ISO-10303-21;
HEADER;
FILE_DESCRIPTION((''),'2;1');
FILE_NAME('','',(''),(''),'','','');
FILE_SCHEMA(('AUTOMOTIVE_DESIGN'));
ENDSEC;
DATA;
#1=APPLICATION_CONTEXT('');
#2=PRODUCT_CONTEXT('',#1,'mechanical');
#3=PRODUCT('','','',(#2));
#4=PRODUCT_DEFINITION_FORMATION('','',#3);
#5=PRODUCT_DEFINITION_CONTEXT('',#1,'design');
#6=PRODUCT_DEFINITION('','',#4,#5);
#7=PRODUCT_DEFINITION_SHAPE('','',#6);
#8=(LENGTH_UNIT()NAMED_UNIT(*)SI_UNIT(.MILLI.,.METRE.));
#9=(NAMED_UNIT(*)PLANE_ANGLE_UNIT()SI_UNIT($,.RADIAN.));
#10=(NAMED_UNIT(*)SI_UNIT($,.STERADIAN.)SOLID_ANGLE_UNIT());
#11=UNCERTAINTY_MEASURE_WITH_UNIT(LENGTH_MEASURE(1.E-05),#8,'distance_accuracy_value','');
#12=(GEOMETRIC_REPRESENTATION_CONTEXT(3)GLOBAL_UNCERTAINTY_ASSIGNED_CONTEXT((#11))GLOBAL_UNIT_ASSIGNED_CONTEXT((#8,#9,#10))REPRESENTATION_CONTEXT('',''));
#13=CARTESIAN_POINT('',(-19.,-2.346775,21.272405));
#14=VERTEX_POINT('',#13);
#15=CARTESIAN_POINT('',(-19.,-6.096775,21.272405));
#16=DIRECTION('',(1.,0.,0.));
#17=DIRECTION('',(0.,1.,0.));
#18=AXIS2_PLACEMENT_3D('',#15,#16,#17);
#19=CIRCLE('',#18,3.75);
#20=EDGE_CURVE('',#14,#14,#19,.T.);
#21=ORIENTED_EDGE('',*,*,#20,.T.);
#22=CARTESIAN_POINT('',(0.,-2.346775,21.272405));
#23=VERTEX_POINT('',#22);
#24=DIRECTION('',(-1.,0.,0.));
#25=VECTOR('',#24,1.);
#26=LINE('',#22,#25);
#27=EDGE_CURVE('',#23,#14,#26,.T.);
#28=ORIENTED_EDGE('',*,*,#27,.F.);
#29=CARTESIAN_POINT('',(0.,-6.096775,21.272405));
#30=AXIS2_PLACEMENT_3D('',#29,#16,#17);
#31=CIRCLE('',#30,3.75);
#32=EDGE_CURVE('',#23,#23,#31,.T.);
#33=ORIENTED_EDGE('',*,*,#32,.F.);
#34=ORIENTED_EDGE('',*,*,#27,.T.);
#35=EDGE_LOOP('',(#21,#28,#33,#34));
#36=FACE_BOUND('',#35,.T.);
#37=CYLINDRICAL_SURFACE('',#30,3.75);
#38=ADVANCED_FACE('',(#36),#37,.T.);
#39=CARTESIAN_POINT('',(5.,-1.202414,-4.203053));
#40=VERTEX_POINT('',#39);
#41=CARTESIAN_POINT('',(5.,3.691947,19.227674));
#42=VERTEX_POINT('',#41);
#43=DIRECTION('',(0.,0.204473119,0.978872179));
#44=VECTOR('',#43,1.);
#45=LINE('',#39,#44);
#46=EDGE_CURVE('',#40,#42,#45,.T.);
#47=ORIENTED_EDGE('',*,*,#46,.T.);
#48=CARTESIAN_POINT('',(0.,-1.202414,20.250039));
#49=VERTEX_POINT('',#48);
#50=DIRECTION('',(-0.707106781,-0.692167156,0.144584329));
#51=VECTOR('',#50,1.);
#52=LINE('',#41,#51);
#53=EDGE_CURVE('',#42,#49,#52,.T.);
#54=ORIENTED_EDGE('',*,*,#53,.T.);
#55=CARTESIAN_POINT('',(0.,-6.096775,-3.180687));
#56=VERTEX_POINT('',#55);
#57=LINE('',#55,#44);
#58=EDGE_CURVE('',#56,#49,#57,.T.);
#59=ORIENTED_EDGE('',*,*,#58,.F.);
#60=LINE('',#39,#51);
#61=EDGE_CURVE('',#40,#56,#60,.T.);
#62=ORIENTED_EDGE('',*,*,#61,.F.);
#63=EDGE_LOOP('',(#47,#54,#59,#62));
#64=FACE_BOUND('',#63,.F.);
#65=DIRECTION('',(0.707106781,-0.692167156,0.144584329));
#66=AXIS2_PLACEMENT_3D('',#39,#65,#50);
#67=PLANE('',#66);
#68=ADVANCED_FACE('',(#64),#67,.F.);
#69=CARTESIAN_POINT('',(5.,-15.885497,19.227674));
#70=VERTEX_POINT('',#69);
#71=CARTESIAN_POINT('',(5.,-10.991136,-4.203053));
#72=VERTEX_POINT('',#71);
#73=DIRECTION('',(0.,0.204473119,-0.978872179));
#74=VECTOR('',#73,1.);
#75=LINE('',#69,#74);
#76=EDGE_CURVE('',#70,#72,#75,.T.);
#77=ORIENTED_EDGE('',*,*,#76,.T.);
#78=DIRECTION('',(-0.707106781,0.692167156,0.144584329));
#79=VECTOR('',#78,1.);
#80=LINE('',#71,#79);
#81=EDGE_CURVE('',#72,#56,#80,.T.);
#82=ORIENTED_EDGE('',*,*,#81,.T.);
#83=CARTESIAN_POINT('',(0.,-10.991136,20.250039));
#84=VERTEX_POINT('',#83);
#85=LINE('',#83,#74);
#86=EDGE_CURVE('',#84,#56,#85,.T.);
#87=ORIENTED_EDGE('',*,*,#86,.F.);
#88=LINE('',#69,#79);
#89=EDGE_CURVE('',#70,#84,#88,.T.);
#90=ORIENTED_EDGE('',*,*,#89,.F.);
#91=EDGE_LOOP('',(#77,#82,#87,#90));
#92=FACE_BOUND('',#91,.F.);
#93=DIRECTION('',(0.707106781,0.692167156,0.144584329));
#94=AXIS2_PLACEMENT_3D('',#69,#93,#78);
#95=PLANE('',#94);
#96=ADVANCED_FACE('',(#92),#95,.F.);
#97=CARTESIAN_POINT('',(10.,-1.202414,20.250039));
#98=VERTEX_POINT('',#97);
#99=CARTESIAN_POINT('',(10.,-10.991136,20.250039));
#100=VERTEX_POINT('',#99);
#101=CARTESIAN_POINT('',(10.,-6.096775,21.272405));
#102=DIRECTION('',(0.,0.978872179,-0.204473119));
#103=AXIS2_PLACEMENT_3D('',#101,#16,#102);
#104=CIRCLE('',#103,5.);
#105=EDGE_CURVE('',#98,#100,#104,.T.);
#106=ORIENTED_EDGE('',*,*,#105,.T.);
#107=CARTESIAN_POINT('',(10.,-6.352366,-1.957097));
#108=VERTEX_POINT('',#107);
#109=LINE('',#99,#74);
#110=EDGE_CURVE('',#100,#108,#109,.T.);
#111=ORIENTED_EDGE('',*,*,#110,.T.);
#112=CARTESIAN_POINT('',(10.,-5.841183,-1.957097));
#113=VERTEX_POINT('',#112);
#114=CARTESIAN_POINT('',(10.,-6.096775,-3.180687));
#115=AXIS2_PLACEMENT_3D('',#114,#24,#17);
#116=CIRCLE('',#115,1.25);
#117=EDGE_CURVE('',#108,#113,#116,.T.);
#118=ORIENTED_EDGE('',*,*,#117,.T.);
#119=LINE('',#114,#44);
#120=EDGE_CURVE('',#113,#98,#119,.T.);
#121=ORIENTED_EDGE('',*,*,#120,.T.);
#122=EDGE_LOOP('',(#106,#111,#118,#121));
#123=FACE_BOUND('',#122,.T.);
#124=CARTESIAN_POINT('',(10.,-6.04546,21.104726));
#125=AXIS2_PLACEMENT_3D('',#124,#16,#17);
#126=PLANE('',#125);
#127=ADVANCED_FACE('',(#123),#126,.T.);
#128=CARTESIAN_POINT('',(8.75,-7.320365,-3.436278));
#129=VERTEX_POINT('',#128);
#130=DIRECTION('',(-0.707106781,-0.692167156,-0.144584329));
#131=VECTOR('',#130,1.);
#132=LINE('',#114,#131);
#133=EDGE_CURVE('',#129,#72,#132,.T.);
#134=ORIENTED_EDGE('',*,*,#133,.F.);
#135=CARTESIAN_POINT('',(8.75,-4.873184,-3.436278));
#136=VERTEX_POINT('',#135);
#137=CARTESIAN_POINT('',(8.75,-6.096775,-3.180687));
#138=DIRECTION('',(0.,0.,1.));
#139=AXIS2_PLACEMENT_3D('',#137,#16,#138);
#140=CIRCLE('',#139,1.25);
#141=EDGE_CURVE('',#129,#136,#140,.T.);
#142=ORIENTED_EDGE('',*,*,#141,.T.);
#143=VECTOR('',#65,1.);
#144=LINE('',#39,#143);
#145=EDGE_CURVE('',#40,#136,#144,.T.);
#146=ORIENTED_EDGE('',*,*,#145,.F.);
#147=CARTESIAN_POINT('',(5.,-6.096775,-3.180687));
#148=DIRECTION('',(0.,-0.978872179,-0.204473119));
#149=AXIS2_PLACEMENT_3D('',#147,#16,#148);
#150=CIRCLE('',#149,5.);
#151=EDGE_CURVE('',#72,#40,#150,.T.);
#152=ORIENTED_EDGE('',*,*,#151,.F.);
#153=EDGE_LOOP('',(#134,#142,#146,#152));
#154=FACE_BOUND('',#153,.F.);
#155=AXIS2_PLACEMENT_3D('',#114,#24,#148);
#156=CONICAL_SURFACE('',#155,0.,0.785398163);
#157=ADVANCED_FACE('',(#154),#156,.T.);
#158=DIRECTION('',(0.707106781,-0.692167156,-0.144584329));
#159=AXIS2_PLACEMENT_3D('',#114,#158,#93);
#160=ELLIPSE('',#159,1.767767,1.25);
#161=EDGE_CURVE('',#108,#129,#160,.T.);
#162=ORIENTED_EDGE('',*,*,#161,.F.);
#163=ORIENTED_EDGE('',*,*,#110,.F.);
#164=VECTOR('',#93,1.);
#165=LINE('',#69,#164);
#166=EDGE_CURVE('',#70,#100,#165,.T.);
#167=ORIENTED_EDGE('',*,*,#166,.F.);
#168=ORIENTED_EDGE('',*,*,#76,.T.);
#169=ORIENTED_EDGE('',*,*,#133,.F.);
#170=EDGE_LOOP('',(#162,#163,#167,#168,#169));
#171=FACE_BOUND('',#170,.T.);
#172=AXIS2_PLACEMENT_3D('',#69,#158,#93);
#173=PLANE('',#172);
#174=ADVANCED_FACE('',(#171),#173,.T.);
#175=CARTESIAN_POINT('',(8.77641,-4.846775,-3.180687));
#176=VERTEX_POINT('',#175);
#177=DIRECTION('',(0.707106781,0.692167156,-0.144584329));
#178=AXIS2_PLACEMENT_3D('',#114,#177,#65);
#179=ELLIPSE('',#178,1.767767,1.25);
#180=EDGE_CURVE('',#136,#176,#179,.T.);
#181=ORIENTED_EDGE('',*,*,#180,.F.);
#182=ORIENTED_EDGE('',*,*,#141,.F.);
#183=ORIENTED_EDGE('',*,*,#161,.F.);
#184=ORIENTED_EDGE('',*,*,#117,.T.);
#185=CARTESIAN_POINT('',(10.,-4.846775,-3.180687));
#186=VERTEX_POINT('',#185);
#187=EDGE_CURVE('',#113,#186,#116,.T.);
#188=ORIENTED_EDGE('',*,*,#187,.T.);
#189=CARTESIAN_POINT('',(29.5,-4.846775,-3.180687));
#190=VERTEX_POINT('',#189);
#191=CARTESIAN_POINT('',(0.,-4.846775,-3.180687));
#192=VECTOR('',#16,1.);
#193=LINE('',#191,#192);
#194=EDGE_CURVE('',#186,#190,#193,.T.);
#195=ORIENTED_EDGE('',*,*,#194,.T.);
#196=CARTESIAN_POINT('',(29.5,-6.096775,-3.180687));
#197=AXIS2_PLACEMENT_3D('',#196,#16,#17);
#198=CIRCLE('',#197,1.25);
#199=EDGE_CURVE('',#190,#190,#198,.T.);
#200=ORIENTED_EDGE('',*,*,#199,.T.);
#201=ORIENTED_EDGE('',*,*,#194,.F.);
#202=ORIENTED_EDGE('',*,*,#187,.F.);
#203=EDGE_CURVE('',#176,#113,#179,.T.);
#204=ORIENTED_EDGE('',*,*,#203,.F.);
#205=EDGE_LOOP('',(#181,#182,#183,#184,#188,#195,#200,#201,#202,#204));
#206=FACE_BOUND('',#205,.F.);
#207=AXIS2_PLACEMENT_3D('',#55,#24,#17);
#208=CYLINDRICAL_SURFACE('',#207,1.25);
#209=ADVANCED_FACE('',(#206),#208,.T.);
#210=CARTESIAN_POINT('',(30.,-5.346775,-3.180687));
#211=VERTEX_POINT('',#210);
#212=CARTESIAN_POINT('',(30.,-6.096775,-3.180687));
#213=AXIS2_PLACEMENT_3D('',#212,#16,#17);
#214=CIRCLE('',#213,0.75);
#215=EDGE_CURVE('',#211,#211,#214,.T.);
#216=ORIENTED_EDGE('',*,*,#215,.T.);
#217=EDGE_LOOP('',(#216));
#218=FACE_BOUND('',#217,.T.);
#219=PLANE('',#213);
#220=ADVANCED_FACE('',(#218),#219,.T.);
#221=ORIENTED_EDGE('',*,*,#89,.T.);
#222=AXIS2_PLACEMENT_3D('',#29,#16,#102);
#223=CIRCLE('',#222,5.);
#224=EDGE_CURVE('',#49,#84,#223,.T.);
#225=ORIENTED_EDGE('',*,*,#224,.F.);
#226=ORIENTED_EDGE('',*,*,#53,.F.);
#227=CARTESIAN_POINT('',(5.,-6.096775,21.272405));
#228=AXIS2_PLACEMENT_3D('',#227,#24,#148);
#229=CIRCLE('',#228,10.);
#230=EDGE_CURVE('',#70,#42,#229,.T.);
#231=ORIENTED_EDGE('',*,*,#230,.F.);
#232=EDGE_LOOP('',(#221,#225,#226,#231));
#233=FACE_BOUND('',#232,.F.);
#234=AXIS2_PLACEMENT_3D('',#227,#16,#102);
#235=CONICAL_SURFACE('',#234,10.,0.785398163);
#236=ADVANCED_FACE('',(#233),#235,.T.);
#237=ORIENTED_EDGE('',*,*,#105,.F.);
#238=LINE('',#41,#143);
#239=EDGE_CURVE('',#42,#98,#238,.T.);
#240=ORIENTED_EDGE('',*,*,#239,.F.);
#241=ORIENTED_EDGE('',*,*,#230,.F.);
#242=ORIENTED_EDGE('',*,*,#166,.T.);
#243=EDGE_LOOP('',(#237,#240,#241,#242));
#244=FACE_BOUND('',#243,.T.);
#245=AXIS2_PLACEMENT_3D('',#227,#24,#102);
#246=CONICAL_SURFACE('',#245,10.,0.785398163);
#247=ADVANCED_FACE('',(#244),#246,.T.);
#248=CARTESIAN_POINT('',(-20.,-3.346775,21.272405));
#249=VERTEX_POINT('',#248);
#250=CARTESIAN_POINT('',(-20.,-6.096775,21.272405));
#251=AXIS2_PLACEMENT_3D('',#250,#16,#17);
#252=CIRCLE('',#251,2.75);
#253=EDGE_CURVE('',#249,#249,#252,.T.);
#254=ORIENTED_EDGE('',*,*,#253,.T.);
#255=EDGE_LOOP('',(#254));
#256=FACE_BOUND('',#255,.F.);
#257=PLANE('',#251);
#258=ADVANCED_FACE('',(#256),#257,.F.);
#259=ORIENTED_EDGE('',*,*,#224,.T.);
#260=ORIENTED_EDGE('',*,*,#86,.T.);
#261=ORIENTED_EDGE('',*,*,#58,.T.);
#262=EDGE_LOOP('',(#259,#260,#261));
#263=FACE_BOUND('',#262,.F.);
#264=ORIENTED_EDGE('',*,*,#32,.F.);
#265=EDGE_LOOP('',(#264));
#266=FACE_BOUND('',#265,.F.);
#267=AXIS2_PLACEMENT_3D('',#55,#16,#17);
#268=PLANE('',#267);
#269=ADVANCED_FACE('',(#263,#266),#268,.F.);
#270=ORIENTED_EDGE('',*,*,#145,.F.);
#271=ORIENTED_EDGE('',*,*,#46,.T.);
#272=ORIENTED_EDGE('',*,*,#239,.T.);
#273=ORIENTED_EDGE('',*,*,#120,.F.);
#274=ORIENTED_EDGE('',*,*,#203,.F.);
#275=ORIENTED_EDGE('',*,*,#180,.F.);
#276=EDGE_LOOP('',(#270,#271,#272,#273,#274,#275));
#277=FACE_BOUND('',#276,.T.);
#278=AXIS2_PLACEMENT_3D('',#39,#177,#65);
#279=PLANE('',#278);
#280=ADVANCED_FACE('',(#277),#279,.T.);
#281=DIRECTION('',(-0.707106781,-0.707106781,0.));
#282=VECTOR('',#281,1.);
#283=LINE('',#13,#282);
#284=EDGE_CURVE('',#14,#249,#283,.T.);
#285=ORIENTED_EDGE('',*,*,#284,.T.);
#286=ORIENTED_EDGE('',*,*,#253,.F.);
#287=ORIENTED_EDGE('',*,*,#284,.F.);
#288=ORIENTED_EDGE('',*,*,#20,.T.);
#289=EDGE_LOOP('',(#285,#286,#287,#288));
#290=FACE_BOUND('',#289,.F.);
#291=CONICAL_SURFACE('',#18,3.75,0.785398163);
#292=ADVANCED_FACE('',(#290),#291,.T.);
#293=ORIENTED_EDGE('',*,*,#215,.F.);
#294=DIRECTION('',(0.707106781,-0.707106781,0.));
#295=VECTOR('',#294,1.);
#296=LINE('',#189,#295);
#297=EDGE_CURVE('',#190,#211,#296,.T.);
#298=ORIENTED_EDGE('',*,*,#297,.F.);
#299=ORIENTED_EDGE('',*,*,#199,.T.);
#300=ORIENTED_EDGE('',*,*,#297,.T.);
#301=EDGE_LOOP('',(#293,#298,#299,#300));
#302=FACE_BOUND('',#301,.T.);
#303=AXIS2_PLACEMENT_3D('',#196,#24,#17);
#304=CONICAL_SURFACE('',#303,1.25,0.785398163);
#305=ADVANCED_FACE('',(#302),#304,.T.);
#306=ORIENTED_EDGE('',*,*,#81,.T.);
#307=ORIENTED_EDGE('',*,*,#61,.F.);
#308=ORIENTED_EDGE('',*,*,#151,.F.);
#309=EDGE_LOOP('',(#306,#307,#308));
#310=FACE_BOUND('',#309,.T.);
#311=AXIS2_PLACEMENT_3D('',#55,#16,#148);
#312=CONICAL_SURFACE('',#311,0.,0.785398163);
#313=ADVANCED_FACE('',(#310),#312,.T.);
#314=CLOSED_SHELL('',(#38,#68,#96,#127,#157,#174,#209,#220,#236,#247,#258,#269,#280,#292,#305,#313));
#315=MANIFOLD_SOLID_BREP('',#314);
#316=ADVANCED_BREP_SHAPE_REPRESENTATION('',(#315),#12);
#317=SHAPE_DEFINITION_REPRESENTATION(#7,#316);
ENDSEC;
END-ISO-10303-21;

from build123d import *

# Parameters (mm, degrees)
F0_R         = 3.75
F0_R_2       = 1.25
F1_DEPTH     = 10
F2_DEPTH     = 20
F3_DEPTH     = 30
F4_T1_DEPTH  = 23.936451485
F4_T3_DEPTH  = 23.936451485
F4_T8_DEPTH  = 23.936451485
F4_S9_R      = 1.25
F4_T10_DEPTH = 15
F4_T14_ANGLE = 156.4026846179
F4_S15_R     = 1.25
F4_T16_DEPTH = 8
F4_T18_ANGLE = 203.5973153821
F4_T22_DEPTH = 23.936451485
F4_S23_R     = 1.25
F4_T24_DEPTH = 15
F4_T26_ANGLE = 156.4026846179
F4_T28_ANGLE = 203.5973153821
F5_SIZE      = 1
F6_SIZE      = 0.5


# Not quite as in the source:
# - a fillet or chamfer that OpenCascade refuses, or shapes differently, is made with other operations: its cross-section is extruded or revolved along the edge and cut away or added


with BuildPart() as f1:
    # F0 (on Right) → F1 (new body)
    with BuildSketch(Plane.YZ):
        with BuildLine():
            ThreePointArc((3.6919470815, 19.2276737533), (3.8502654993, 20.2445960951), (3.9032252878, 21.2724049449))
            ThreePointArc((3.9032252878, 21.2724049449), (-7.124583562, 31.2194451563), (-15.8854965059, 19.2276737533))
            ThreePointArc((-15.8854965059, 19.2276737533), (-6.0967747122, 11.2724049449), (3.6919470815, 19.2276737533))
        make_face()
        with Locations((-6.0967747122, 21.2724049449)):
            Circle(F0_R, mode=Mode.SUBTRACT)
        with BuildLine():
            ThreePointArc((3.6919470815, 19.2276737533), (-6.0967747122, 11.2724049449), (-15.8854965059, 19.2276737533))
            Line((-15.8854965059, 19.2276737533), (-10.991135609, -4.2030526781))
            ThreePointArc((-10.991135609, -4.2030526781), (-6.6106791371, 1.7928330234), (-1.0967747122, -3.1806870823))
            ThreePointArc((-1.0967747122, -3.1806870823), (-1.1232546065, -3.6945915072), (-1.2024138154, -4.2030526781))
            Line((-1.2024138154, -4.2030526781), (3.6919470815, 19.2276737533))
        make_face()
        with BuildLine():
            ThreePointArc((-1.0967747122, -3.1806870823), (-6.6106791371, 1.7928330234), (-10.991135609, -4.2030526781))
            ThreePointArc((-10.991135609, -4.2030526781), (-6.0967747122, -8.1806870823), (-1.2024138154, -4.2030526781))
            ThreePointArc((-1.2024138154, -4.2030526781), (-1.1232546065, -3.6945915072), (-1.0967747122, -3.1806870823))
        make_face()
        with Locations((-6.0967747122, -3.1806870823)):
            Circle(F0_R_2, mode=Mode.SUBTRACT)
        with Locations((-6.0967747122, 21.2724049449)):
            Circle(F0_R)
        with Locations((-6.0967747122, -3.1806870823)):
            Circle(F0_R_2)
    extrude(amount=F1_DEPTH)

    # F0 (on Right) → F2 (join)
    with BuildSketch(Plane.YZ):
        with Locations((-6.0967747122, 21.2724049449)):
            Circle(F0_R)
    extrude(amount=-F2_DEPTH)

    # F0 (on Right) → F3 (join)
    with BuildSketch(Plane.YZ):
        with Locations((-6.0967747122, -3.1806870823)):
            Circle(F0_R_2)
    extrude(amount=F3_DEPTH)

    # F4: chamfer of 5 on 2 edges, made by hand

    # F4_s2 → F4_t1 (cut)
    with BuildSketch(Plane(origin=(0, -0.8915258311, -4.2679929606), x_dir=(1, 0, 0), z_dir=(0, 0.2044731192, 0.9788721794))):
        Polygon((5, -0.3175981408), (0, -5.3175981408), (0, -0.3175981408), align=None)
    extrude(amount=F4_T1_DEPTH, mode=Mode.SUBTRACT)

    # F4_s4 → F4_t3 (cut)
    with BuildSketch(Plane(origin=(0, -4.5126383008, 21.6033095513), x_dir=(1, 0, 0), z_dir=(0, 0.2044731192, -0.9788721794))):
        Polygon((5, 11.6183281585), (0, 6.6183281585), (0, 11.6183281585), align=None)
    extrude(amount=F4_T3_DEPTH, mode=Mode.SUBTRACT)


with BuildPart() as f4_tool6:
    # F4_s7 → F4_t8 (new body)
    with BuildSketch(Plane(origin=(0, -0.8915258311, -4.2679929606), x_dir=(1, 0, 0), z_dir=(0, 0.2044731192, 0.9788721794))):
        Polygon((5, -0.3175981408), (10, -5.3175981408), (10, -0.3175981408), align=None)
    extrude(amount=F4_T8_DEPTH)

    # F4_s9 → F4_t10 (cut, symmetric)
    with BuildSketch(Plane.YZ.offset(7.5)):
        with Locations((-6.0967747122, -3.1806870823)):
            Circle(F4_S9_R)
    extrude(amount=F4_T10_DEPTH, both=True, mode=Mode.SUBTRACT)


with BuildPart() as f1_1:
    add(f1.part)

    # F4_t5: cut F4_tool6
    add(f4_tool6.part, mode=Mode.SUBTRACT)


with BuildPart() as f4_tool12:
    # F4_s13 → F4_t14 (revolve)
    with BuildSketch(Plane(origin=(0, 0.381722596, -1.8274168801), x_dir=(1, 0, 0), z_dir=(0, -0.2044731192, 0.9788721794))):
        Polygon((10, -6.6183281585), (5, -11.6183281585), (10, -11.6183281585), align=None)
    revolve(axis=Axis((10, -6.0967747122, -3.1806870823), (1, 0, 0)), revolution_arc=F4_T14_ANGLE)

    # F4_s15 → F4_t16 (cut, symmetric)
    with BuildSketch(Plane.YZ.offset(7.5)):
        with Locations((-6.0967747122, -3.1806870823)):
            Circle(F4_S15_R)
    extrude(amount=F4_T16_DEPTH, both=True, mode=Mode.SUBTRACT)


with BuildPart() as f1_2:
    add(f1_1.part)

    # F4_t11: cut F4_tool12
    add(f4_tool12.part, mode=Mode.SUBTRACT)

    # F4_s17 → F4_t18 (revolve, cut)
    with BuildSketch(Plane(origin=(0, 4.0028350658, 19.1627334708), x_dir=(1, 0, 0), z_dir=(0, -0.2044731192, -0.9788721794))):
        Polygon((5, 0.3175981408), (10, 5.3175981408), (10, 0.3175981408), align=None)
    revolve(axis=Axis((10, -6.0967747122, 21.2724049449), (1, 0, 0)), revolution_arc=F4_T18_ANGLE, mode=Mode.SUBTRACT)


with BuildPart() as f4_tool20:
    # F4_s21 → F4_t22 (new body)
    with BuildSketch(Plane(origin=(0, -4.5126383008, 21.6033095513), x_dir=(1, 0, 0), z_dir=(0, 0.2044731192, -0.9788721794))):
        Polygon((5, 11.6183281585), (10, 6.6183281585), (10, 11.6183281585), align=None)
    extrude(amount=F4_T22_DEPTH)

    # F4_s23 → F4_t24 (cut, symmetric)
    with BuildSketch(Plane.YZ.offset(7.5)):
        with Locations((-6.0967747122, -3.1806870823)):
            Circle(F4_S23_R)
    extrude(amount=F4_T24_DEPTH, both=True, mode=Mode.SUBTRACT)


with BuildPart() as f1_3:
    add(f1_2.part)

    # F4_t19: cut F4_tool20
    add(f4_tool20.part, mode=Mode.SUBTRACT)

    # F4_s25 → F4_t26 (revolve, cut)
    with BuildSketch(Plane(origin=(0, 0.381722596, -1.8274168801), x_dir=(1, 0, 0), z_dir=(0, -0.2044731192, 0.9788721794))):
        Polygon((0, -6.6183281585), (5, -11.6183281585), (0, -11.6183281585), align=None)
    revolve(axis=Axis((0, -6.0967747122, -3.1806870823), (1, 0, 0)), revolution_arc=F4_T26_ANGLE, mode=Mode.SUBTRACT)

    # F4_s27 → F4_t28 (revolve, cut)
    with BuildSketch(Plane(origin=(0, 4.0028350658, 19.1627334708), x_dir=(1, 0, 0), z_dir=(0, -0.2044731192, -0.9788721794))):
        Polygon((5, 0.3175981408), (0, 5.3175981408), (0, 0.3175981408), align=None)
    revolve(axis=Axis((0, -6.0967747122, 21.2724049449), (1, 0, 0)), revolution_arc=F4_T28_ANGLE, mode=Mode.SUBTRACT)

    # F5
    f5_edges = [f1_3.edges().sort_by_distance(p)[0] for p in [
        (-20, -9.846775, 21.272405),
    ]]
    chamfer(f5_edges, length=F5_SIZE)

    # F6
    f6_edges = [f1_3.edges().sort_by_distance(p)[0] for p in [
        (30, -7.346775, -3.180687),
    ]]
    chamfer(f6_edges, length=F6_SIZE)


solid = f1_3.part
